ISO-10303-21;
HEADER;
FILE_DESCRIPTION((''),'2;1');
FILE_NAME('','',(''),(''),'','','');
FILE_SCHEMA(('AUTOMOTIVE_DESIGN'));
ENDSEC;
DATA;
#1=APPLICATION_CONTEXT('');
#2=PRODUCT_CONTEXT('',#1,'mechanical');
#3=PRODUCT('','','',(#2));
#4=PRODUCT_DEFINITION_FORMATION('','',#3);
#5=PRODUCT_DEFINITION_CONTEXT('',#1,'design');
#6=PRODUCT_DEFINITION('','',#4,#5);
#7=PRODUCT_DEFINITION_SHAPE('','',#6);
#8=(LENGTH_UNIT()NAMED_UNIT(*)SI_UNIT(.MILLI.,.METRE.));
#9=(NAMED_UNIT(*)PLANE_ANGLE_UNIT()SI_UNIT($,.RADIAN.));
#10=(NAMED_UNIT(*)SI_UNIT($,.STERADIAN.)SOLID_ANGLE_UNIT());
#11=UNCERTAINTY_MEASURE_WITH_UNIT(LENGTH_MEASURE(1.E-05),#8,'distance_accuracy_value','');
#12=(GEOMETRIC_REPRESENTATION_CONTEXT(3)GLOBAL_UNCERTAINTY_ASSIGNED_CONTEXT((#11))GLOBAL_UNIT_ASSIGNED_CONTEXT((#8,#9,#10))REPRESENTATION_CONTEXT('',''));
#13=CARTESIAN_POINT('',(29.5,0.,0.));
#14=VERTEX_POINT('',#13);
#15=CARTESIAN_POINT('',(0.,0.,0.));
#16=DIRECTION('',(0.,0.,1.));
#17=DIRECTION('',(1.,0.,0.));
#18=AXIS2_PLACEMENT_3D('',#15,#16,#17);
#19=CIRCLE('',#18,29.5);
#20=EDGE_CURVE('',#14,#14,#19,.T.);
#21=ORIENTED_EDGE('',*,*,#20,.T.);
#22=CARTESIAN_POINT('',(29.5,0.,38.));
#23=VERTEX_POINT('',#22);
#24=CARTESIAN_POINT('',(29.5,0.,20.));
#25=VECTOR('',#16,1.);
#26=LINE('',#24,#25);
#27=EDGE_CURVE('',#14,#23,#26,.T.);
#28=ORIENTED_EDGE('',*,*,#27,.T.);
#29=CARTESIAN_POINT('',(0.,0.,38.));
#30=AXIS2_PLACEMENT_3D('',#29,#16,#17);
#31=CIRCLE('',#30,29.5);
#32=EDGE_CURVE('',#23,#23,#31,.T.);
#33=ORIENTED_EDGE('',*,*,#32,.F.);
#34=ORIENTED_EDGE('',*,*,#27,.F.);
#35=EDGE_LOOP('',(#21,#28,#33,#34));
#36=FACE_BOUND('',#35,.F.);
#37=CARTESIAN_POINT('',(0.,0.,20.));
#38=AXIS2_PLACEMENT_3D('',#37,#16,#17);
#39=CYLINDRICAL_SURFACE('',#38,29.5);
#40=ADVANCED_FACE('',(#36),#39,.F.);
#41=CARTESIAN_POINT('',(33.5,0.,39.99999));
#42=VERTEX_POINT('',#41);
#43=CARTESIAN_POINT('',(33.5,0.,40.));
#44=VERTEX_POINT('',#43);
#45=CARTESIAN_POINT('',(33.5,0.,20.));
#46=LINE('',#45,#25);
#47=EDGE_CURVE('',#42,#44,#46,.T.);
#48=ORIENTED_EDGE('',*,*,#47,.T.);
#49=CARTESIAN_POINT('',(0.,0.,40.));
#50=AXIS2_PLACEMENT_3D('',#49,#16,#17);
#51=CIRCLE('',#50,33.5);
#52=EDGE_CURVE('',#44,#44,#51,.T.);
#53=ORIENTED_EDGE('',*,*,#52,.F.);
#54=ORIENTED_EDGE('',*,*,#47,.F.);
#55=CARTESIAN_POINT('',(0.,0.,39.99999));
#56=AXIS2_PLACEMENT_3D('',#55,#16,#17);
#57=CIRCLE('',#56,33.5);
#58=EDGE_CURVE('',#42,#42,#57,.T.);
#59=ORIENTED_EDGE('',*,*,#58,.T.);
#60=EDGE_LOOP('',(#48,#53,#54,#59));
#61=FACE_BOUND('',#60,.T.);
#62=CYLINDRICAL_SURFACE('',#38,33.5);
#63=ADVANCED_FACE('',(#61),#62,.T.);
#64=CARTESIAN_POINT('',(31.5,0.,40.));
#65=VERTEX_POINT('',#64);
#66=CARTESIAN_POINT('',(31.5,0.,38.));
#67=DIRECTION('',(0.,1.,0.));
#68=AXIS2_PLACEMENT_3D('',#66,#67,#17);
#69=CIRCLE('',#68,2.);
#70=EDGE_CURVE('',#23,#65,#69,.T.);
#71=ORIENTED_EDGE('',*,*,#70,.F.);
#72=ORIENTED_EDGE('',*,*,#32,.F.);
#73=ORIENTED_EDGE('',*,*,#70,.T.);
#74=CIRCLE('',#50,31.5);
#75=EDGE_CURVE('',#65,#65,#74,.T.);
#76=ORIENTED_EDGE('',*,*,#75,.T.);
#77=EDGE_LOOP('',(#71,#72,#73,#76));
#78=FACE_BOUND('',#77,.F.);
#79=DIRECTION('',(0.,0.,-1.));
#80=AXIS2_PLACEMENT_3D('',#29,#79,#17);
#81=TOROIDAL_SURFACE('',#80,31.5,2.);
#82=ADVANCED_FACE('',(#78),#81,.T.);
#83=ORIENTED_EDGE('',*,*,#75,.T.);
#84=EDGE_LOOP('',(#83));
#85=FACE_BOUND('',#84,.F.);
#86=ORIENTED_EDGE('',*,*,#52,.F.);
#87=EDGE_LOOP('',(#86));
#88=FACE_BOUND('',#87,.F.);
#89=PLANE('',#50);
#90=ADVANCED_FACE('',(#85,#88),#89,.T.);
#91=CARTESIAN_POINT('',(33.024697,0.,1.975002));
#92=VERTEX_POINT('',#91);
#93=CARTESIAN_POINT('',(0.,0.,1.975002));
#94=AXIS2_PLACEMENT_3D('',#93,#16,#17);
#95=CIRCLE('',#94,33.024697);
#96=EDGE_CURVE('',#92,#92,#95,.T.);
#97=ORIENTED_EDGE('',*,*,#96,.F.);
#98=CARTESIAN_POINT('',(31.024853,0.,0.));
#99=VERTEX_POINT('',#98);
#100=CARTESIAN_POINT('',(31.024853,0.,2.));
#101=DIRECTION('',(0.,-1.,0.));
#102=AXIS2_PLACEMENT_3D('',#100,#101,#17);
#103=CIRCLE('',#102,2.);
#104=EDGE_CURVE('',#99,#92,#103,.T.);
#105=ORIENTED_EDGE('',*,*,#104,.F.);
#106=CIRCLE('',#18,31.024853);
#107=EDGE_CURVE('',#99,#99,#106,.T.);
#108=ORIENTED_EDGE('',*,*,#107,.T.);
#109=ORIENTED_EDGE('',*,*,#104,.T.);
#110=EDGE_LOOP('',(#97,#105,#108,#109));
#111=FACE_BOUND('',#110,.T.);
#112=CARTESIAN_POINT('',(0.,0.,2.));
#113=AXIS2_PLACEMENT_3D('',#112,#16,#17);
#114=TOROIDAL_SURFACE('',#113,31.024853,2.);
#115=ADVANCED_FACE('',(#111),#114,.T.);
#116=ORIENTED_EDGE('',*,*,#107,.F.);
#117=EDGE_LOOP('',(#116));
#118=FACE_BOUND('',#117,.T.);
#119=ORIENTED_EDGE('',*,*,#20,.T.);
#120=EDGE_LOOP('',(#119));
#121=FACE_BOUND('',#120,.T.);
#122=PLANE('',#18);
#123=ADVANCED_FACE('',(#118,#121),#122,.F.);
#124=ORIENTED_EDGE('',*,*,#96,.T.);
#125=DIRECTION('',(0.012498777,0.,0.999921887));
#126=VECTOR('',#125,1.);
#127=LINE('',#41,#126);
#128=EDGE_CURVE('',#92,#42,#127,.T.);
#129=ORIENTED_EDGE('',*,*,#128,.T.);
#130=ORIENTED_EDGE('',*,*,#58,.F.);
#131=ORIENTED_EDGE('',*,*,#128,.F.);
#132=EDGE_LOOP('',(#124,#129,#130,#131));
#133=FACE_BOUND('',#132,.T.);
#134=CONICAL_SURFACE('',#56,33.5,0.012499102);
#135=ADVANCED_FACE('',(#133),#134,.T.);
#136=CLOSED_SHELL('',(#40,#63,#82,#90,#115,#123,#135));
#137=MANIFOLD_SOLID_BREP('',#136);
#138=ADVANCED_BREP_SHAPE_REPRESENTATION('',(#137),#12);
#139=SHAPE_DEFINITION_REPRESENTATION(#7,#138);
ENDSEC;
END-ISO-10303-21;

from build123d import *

# Parameters (mm, degrees)
F0_W     = 4
F0_H     = 40
F3_SIZE2 = 39.99999
F3_SIZE  = 0.49999
F4_R     = 2


# Not quite as in the source:
# - a fillet or chamfer is up to 0.001 mm smaller than in the source, because OpenCascade refuses the exact size


with BuildPart() as f2:
    # F0 (on Front) → F2 (revolve)
    with BuildSketch(Plane.XZ):
        with Locations((31.5, 20)):
            Rectangle(F0_W, F0_H)
    revolve(axis=Axis((0, 0, 14.9673912674), (0, 0, 1)))

    # F3 (size 0.5 and 40 in the source; OpenCascade refuses exactly that, so slightly less here)
    f3_edges = [f2.edges().sort_by_distance(p)[0] for p in [
        (-33.5, 0, 0),
    ]]
    chamfer(f3_edges, length=F3_SIZE, length2=F3_SIZE2)

    # F4
    f4_edges = [f2.edges().sort_by_distance(p)[0] for p in [
        (-29.5, 0, 40),
        (-33.00001, 0, 0),
    ]]
    fillet(f4_edges, radius=F4_R)


solid = f2.part
